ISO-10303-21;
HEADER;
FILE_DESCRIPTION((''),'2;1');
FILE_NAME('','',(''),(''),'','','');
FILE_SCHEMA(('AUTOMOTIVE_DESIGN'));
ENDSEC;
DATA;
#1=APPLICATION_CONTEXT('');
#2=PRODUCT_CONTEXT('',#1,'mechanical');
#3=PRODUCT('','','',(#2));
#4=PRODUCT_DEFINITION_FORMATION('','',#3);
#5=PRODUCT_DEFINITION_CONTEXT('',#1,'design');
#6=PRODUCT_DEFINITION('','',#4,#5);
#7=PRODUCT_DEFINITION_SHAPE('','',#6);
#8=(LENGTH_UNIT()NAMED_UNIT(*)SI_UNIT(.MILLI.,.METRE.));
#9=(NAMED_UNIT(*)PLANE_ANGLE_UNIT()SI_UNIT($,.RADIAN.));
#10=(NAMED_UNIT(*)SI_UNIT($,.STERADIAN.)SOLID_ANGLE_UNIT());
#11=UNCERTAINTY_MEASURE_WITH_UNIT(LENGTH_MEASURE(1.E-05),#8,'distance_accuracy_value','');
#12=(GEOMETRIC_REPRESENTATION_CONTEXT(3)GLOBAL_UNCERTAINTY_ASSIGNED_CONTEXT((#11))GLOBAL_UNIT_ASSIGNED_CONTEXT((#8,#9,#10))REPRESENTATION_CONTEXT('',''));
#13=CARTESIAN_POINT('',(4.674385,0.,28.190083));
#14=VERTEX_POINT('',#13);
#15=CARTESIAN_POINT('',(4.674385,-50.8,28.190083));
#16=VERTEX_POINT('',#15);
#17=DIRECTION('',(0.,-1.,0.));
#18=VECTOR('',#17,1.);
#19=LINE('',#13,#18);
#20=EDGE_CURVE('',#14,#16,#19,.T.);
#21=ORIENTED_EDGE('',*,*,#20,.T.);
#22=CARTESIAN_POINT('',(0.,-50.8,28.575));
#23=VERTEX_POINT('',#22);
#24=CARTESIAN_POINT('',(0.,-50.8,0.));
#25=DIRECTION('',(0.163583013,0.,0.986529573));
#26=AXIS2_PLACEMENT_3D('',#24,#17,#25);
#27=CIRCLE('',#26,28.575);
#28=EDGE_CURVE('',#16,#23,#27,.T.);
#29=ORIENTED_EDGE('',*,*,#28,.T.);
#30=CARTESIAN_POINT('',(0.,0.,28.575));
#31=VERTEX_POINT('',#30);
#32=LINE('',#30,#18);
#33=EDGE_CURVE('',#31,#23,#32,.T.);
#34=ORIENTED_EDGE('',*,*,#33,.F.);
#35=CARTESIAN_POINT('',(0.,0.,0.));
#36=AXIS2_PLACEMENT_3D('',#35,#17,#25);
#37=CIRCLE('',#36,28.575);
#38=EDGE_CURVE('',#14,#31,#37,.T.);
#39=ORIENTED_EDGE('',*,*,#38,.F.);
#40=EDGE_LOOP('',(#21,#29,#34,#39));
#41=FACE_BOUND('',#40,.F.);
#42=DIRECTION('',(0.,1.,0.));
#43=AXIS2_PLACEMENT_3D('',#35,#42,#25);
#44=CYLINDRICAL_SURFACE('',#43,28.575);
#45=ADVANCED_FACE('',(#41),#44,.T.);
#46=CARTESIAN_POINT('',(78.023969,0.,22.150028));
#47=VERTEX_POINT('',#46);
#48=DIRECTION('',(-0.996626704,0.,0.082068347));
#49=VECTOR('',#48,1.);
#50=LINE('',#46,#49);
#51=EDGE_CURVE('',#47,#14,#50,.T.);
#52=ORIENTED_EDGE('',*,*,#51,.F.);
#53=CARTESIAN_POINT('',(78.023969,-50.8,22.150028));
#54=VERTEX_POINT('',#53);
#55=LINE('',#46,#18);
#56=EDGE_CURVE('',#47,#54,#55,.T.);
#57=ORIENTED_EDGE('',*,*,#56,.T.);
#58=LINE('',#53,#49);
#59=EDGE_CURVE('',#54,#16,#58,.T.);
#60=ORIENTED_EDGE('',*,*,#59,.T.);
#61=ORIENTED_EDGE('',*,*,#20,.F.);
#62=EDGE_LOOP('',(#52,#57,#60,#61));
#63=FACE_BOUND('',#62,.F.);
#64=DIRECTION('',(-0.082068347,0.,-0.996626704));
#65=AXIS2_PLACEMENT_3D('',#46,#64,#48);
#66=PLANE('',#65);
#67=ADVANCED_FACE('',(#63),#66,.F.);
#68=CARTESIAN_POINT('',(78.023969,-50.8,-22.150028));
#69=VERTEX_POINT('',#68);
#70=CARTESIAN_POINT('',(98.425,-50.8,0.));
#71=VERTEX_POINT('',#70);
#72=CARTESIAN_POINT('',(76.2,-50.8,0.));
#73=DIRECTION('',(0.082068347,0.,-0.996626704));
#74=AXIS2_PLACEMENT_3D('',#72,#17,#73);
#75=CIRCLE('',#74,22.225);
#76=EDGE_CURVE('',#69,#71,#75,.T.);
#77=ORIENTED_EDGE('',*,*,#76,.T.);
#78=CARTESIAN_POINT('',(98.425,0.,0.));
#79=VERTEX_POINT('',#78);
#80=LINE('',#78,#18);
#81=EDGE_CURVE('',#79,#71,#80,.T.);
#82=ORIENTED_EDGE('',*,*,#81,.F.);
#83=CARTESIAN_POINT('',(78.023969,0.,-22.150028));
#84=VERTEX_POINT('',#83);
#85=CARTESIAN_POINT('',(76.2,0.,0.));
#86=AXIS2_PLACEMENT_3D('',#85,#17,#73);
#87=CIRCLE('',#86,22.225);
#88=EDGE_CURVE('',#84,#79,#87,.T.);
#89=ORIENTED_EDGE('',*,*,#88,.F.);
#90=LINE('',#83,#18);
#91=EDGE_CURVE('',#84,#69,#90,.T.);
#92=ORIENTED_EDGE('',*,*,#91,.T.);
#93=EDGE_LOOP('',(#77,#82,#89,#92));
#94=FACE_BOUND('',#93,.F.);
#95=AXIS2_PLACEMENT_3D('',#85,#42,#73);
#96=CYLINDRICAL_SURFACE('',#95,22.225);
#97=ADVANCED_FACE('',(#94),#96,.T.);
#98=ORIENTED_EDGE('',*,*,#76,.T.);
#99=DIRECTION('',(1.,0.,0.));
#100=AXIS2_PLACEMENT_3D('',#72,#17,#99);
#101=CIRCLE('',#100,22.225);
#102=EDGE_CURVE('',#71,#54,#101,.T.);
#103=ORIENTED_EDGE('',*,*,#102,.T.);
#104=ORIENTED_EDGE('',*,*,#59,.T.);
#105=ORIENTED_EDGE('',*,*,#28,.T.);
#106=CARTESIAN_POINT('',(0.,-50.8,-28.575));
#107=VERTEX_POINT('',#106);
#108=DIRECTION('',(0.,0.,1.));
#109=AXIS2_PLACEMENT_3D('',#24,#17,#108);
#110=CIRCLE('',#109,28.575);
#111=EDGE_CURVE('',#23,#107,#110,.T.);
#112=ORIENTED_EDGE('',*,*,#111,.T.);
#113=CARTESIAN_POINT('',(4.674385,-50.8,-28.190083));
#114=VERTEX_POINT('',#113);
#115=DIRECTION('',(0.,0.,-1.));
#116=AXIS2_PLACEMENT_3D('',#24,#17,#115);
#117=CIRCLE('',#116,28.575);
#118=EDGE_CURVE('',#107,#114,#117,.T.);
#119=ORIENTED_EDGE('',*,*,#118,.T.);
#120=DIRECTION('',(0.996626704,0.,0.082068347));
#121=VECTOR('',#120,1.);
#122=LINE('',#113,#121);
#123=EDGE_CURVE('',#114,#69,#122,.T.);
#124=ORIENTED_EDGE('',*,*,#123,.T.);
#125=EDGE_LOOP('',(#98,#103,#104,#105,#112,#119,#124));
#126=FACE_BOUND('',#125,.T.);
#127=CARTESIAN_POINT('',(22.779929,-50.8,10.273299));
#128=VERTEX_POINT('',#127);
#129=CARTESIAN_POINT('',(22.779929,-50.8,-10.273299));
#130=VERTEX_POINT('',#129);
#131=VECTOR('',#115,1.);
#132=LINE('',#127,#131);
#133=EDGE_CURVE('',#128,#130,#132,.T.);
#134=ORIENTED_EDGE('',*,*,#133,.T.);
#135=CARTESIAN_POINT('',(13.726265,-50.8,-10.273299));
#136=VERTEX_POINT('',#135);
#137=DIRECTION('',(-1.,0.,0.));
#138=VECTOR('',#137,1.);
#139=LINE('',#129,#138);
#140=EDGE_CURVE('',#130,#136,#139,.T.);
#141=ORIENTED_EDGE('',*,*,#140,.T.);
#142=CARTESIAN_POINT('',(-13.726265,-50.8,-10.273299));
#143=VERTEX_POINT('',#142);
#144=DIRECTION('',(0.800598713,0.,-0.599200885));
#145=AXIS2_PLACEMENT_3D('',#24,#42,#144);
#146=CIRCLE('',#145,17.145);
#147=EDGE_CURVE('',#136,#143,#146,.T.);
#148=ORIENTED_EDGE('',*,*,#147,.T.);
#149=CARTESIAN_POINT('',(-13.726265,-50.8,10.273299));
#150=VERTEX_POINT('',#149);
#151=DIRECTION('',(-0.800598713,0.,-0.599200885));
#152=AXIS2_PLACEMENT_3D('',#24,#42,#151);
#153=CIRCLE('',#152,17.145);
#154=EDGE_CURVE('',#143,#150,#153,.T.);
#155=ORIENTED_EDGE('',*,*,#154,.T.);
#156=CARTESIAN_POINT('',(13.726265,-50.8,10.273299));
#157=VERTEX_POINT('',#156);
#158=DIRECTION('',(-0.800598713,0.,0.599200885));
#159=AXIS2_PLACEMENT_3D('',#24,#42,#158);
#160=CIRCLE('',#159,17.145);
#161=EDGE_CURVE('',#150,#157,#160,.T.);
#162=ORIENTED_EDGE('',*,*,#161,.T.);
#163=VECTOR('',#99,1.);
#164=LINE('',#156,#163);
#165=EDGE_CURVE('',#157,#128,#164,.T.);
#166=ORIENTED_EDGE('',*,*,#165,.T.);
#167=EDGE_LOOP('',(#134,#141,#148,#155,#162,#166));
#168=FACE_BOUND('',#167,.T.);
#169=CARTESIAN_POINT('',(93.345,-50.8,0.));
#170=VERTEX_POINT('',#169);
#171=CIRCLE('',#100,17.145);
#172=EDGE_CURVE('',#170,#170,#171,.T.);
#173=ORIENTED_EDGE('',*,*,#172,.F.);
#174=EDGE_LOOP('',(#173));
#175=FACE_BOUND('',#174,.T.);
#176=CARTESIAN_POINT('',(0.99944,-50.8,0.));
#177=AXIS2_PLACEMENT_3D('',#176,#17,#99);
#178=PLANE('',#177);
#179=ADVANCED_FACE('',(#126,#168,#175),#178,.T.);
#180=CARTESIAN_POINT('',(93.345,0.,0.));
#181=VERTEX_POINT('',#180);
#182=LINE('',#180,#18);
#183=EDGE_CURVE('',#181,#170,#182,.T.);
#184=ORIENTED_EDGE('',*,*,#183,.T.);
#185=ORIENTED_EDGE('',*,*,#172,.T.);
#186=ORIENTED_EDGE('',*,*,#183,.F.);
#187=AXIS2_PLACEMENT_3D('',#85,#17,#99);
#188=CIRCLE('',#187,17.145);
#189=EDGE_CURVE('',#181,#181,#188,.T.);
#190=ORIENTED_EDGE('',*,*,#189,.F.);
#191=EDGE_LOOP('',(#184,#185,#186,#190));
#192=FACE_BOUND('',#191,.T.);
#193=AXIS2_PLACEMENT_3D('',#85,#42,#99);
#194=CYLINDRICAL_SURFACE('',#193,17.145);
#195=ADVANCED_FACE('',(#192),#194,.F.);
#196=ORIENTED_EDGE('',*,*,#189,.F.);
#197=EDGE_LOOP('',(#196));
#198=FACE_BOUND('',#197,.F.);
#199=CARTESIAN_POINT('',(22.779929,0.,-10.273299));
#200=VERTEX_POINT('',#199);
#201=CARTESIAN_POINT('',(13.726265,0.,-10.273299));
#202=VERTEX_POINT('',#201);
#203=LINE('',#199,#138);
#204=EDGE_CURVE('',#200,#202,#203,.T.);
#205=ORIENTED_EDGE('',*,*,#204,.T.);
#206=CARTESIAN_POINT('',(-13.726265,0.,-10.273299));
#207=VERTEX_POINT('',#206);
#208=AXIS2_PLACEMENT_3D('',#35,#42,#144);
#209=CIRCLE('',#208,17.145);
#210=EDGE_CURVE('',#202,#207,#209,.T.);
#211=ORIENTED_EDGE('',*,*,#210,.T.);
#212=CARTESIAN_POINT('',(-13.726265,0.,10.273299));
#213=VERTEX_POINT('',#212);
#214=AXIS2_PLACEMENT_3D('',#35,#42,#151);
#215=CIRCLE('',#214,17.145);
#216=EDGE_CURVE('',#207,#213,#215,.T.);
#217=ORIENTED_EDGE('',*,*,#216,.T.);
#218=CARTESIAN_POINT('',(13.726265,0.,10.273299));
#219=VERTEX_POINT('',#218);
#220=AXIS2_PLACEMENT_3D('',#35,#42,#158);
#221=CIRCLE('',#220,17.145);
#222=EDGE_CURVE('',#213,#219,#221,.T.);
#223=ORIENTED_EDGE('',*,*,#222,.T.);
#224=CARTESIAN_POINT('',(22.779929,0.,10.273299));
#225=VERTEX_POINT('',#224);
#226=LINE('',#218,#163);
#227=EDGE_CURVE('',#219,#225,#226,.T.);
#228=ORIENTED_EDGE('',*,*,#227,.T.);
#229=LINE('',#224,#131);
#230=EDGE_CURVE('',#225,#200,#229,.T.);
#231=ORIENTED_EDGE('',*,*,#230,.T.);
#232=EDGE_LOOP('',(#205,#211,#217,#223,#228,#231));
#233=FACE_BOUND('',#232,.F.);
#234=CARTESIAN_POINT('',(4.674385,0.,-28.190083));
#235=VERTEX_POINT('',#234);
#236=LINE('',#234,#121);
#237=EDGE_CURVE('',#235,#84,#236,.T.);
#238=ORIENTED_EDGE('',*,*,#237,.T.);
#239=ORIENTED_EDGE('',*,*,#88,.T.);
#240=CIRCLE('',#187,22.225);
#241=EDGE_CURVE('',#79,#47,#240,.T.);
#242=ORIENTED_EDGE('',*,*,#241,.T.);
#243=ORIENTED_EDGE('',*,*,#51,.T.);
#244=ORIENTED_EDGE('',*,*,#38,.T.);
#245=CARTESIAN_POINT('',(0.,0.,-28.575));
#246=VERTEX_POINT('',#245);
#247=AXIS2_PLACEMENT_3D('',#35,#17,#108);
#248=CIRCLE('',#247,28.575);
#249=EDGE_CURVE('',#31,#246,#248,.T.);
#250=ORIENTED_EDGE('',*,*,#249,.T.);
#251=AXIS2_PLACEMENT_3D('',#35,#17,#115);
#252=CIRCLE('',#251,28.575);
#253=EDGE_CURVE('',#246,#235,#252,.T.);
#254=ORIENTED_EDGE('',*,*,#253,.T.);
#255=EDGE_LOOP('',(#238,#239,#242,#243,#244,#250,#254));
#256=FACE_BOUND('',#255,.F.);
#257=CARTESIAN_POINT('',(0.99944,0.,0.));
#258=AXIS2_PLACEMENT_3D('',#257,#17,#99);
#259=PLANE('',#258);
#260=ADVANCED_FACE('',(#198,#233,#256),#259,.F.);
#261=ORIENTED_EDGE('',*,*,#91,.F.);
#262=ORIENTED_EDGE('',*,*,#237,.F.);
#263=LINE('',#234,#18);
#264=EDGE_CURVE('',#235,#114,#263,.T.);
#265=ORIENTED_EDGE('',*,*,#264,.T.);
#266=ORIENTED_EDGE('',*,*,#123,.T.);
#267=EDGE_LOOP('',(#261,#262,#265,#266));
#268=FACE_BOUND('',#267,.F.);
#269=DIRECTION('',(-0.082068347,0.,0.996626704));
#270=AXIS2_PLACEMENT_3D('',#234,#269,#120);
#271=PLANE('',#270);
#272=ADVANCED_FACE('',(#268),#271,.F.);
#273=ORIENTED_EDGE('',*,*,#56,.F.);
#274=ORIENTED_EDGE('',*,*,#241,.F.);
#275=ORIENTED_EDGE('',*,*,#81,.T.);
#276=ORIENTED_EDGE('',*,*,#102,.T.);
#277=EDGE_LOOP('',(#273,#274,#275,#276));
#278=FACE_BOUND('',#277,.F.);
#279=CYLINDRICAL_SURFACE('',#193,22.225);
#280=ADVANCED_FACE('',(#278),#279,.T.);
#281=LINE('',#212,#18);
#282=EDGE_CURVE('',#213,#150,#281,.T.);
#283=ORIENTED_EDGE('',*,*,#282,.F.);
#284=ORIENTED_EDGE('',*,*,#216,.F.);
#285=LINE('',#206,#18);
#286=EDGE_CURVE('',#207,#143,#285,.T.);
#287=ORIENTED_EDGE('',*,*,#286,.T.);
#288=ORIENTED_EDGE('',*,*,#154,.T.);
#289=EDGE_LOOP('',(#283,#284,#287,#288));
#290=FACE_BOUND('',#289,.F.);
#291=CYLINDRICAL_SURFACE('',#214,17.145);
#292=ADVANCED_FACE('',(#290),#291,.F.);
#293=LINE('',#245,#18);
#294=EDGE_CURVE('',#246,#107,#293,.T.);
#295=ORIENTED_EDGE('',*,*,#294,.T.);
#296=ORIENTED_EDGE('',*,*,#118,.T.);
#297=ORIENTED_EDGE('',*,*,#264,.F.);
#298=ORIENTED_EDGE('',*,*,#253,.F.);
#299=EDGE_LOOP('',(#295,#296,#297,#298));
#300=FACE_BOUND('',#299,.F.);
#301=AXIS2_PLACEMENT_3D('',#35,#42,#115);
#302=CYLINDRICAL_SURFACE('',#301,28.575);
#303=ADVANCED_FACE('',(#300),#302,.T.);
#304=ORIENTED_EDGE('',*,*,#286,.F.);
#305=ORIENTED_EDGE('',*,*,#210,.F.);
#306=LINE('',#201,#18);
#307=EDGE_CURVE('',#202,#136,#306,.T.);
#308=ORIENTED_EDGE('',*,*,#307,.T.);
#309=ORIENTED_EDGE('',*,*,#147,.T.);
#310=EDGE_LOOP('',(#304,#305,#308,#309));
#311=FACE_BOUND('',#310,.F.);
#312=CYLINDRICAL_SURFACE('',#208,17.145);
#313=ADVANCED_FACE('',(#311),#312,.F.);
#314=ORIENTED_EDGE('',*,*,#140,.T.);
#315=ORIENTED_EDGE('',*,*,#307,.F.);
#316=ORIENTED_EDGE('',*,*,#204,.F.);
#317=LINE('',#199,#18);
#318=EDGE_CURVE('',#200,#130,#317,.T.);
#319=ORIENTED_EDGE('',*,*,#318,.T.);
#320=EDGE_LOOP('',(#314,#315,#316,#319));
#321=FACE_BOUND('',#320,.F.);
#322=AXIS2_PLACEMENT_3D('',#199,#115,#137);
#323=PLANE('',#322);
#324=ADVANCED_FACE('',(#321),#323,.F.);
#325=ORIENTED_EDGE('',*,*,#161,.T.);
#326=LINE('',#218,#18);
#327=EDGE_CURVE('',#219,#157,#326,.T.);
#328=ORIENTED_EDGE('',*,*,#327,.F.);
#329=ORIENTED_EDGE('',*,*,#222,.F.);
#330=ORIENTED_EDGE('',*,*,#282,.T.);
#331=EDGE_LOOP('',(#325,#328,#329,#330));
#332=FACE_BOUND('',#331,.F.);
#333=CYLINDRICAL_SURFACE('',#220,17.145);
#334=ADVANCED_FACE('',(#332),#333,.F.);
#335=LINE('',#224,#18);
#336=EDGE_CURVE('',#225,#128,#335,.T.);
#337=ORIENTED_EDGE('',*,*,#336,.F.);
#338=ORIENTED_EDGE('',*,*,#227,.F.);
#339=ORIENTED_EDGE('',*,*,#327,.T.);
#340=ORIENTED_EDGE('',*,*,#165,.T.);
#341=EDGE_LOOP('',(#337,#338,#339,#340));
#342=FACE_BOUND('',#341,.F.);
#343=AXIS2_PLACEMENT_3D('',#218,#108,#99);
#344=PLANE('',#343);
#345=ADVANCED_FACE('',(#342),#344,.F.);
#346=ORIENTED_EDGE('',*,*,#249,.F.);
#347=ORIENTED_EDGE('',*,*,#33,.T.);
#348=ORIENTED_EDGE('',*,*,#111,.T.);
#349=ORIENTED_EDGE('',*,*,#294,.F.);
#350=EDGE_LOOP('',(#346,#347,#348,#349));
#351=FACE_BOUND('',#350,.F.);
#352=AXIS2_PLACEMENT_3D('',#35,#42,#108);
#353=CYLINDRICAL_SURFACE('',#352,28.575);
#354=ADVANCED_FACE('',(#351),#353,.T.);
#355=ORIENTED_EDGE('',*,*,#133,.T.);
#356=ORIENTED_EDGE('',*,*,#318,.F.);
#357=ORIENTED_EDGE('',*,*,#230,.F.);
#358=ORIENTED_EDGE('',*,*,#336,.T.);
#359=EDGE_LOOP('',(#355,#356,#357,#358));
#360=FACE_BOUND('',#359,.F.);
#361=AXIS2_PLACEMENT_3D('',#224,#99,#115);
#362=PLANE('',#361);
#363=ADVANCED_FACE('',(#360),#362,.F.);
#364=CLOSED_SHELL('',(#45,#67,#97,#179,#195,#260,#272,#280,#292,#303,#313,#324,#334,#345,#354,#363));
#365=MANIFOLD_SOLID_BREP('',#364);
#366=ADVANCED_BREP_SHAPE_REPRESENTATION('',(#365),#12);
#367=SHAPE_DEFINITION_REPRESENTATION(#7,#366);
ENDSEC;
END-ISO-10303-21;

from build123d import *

# Parameters (mm, degrees)
F0_R     = 17.145
F1_DEPTH = 50.8


# Not quite as in the source:
# - a feature names something its author has since deleted; it is built from what else it names


with BuildPart() as f1:
    # F0 (on Front) → F1 (new body)
    with BuildSketch(Plane.XZ):
        with BuildLine():
            Line((4.6743845872, 28.1900825421), (0, 28.575))
            ThreePointArc((0, 28.575), (-28.575, 0), (0, -28.575))
            Line((0, -28.575), (4.6743845872, -28.1900825421))
            ThreePointArc((4.6743845872, -28.1900825421), (21.7956551241, -18.4791786265), (28.575, 0))
            ThreePointArc((28.575, 0), (21.7956551241, 18.4791786265), (4.6743845872, 28.1900825421))
        make_face()
        with BuildLine():
            ThreePointArc((-13.7262649311, -10.27329918), (-17.145, 0), (-13.7262649311, 10.27329918))
            ThreePointArc((-13.7262649311, 10.27329918), (0, 17.145), (13.7262649311, 10.27329918))
            Line((13.7262649311, 10.27329918), (22.7799285203, 10.27329918))
            Line((22.7799285203, 10.27329918), (22.7799285203, -10.27329918))
            Line((22.7799285203, -10.27329918), (13.7262649311, -10.27329918))
            ThreePointArc((13.7262649311, -10.27329918), (0, -17.145), (-13.7262649311, -10.27329918))
        make_face(mode=Mode.SUBTRACT)
        with BuildLine():
            ThreePointArc((4.6743845872, 28.1900825421), (2.3451030211, 28.4786080562), (0, 28.575))
            Line((0, 28.575), (4.6743845872, 28.1900825421))
        make_face()
        with BuildLine():
            Line((4.6743845872, -28.1900825421), (0, -28.575))
            ThreePointArc((0, -28.575), (2.3451030211, -28.4786080562), (4.6743845872, -28.1900825421))
        make_face()
        with BuildLine():
            Line((78.0239690164, 22.1500284882), (4.6743845872, 28.1900825421))
            ThreePointArc((4.6743845872, 28.1900825421), (21.7956551241, 18.4791786265), (28.575, 0))
            ThreePointArc((28.575, 0), (21.7956551241, -18.4791786265), (4.6743845872, -28.1900825421))
            Line((4.6743845872, -28.1900825421), (78.0239690164, -22.1500284882))
            ThreePointArc((78.0239690164, -22.1500284882), (53.975, 0), (78.0239690164, 22.1500284882))
        make_face()
        with BuildLine():
            ThreePointArc((98.425, 0), (92.5476043564, 15.0567744489), (78.0239690164, 22.1500284882))
            ThreePointArc((78.0239690164, 22.1500284882), (53.975, 0), (78.0239690164, -22.1500284882))
            ThreePointArc((78.0239690164, -22.1500284882), (92.5476043564, -15.0567744489), (98.425, 0))
        make_face()
        with Locations((76.2, 0)):
            Circle(F0_R, mode=Mode.SUBTRACT)
    extrude(amount=F1_DEPTH)


solid = f1.part
